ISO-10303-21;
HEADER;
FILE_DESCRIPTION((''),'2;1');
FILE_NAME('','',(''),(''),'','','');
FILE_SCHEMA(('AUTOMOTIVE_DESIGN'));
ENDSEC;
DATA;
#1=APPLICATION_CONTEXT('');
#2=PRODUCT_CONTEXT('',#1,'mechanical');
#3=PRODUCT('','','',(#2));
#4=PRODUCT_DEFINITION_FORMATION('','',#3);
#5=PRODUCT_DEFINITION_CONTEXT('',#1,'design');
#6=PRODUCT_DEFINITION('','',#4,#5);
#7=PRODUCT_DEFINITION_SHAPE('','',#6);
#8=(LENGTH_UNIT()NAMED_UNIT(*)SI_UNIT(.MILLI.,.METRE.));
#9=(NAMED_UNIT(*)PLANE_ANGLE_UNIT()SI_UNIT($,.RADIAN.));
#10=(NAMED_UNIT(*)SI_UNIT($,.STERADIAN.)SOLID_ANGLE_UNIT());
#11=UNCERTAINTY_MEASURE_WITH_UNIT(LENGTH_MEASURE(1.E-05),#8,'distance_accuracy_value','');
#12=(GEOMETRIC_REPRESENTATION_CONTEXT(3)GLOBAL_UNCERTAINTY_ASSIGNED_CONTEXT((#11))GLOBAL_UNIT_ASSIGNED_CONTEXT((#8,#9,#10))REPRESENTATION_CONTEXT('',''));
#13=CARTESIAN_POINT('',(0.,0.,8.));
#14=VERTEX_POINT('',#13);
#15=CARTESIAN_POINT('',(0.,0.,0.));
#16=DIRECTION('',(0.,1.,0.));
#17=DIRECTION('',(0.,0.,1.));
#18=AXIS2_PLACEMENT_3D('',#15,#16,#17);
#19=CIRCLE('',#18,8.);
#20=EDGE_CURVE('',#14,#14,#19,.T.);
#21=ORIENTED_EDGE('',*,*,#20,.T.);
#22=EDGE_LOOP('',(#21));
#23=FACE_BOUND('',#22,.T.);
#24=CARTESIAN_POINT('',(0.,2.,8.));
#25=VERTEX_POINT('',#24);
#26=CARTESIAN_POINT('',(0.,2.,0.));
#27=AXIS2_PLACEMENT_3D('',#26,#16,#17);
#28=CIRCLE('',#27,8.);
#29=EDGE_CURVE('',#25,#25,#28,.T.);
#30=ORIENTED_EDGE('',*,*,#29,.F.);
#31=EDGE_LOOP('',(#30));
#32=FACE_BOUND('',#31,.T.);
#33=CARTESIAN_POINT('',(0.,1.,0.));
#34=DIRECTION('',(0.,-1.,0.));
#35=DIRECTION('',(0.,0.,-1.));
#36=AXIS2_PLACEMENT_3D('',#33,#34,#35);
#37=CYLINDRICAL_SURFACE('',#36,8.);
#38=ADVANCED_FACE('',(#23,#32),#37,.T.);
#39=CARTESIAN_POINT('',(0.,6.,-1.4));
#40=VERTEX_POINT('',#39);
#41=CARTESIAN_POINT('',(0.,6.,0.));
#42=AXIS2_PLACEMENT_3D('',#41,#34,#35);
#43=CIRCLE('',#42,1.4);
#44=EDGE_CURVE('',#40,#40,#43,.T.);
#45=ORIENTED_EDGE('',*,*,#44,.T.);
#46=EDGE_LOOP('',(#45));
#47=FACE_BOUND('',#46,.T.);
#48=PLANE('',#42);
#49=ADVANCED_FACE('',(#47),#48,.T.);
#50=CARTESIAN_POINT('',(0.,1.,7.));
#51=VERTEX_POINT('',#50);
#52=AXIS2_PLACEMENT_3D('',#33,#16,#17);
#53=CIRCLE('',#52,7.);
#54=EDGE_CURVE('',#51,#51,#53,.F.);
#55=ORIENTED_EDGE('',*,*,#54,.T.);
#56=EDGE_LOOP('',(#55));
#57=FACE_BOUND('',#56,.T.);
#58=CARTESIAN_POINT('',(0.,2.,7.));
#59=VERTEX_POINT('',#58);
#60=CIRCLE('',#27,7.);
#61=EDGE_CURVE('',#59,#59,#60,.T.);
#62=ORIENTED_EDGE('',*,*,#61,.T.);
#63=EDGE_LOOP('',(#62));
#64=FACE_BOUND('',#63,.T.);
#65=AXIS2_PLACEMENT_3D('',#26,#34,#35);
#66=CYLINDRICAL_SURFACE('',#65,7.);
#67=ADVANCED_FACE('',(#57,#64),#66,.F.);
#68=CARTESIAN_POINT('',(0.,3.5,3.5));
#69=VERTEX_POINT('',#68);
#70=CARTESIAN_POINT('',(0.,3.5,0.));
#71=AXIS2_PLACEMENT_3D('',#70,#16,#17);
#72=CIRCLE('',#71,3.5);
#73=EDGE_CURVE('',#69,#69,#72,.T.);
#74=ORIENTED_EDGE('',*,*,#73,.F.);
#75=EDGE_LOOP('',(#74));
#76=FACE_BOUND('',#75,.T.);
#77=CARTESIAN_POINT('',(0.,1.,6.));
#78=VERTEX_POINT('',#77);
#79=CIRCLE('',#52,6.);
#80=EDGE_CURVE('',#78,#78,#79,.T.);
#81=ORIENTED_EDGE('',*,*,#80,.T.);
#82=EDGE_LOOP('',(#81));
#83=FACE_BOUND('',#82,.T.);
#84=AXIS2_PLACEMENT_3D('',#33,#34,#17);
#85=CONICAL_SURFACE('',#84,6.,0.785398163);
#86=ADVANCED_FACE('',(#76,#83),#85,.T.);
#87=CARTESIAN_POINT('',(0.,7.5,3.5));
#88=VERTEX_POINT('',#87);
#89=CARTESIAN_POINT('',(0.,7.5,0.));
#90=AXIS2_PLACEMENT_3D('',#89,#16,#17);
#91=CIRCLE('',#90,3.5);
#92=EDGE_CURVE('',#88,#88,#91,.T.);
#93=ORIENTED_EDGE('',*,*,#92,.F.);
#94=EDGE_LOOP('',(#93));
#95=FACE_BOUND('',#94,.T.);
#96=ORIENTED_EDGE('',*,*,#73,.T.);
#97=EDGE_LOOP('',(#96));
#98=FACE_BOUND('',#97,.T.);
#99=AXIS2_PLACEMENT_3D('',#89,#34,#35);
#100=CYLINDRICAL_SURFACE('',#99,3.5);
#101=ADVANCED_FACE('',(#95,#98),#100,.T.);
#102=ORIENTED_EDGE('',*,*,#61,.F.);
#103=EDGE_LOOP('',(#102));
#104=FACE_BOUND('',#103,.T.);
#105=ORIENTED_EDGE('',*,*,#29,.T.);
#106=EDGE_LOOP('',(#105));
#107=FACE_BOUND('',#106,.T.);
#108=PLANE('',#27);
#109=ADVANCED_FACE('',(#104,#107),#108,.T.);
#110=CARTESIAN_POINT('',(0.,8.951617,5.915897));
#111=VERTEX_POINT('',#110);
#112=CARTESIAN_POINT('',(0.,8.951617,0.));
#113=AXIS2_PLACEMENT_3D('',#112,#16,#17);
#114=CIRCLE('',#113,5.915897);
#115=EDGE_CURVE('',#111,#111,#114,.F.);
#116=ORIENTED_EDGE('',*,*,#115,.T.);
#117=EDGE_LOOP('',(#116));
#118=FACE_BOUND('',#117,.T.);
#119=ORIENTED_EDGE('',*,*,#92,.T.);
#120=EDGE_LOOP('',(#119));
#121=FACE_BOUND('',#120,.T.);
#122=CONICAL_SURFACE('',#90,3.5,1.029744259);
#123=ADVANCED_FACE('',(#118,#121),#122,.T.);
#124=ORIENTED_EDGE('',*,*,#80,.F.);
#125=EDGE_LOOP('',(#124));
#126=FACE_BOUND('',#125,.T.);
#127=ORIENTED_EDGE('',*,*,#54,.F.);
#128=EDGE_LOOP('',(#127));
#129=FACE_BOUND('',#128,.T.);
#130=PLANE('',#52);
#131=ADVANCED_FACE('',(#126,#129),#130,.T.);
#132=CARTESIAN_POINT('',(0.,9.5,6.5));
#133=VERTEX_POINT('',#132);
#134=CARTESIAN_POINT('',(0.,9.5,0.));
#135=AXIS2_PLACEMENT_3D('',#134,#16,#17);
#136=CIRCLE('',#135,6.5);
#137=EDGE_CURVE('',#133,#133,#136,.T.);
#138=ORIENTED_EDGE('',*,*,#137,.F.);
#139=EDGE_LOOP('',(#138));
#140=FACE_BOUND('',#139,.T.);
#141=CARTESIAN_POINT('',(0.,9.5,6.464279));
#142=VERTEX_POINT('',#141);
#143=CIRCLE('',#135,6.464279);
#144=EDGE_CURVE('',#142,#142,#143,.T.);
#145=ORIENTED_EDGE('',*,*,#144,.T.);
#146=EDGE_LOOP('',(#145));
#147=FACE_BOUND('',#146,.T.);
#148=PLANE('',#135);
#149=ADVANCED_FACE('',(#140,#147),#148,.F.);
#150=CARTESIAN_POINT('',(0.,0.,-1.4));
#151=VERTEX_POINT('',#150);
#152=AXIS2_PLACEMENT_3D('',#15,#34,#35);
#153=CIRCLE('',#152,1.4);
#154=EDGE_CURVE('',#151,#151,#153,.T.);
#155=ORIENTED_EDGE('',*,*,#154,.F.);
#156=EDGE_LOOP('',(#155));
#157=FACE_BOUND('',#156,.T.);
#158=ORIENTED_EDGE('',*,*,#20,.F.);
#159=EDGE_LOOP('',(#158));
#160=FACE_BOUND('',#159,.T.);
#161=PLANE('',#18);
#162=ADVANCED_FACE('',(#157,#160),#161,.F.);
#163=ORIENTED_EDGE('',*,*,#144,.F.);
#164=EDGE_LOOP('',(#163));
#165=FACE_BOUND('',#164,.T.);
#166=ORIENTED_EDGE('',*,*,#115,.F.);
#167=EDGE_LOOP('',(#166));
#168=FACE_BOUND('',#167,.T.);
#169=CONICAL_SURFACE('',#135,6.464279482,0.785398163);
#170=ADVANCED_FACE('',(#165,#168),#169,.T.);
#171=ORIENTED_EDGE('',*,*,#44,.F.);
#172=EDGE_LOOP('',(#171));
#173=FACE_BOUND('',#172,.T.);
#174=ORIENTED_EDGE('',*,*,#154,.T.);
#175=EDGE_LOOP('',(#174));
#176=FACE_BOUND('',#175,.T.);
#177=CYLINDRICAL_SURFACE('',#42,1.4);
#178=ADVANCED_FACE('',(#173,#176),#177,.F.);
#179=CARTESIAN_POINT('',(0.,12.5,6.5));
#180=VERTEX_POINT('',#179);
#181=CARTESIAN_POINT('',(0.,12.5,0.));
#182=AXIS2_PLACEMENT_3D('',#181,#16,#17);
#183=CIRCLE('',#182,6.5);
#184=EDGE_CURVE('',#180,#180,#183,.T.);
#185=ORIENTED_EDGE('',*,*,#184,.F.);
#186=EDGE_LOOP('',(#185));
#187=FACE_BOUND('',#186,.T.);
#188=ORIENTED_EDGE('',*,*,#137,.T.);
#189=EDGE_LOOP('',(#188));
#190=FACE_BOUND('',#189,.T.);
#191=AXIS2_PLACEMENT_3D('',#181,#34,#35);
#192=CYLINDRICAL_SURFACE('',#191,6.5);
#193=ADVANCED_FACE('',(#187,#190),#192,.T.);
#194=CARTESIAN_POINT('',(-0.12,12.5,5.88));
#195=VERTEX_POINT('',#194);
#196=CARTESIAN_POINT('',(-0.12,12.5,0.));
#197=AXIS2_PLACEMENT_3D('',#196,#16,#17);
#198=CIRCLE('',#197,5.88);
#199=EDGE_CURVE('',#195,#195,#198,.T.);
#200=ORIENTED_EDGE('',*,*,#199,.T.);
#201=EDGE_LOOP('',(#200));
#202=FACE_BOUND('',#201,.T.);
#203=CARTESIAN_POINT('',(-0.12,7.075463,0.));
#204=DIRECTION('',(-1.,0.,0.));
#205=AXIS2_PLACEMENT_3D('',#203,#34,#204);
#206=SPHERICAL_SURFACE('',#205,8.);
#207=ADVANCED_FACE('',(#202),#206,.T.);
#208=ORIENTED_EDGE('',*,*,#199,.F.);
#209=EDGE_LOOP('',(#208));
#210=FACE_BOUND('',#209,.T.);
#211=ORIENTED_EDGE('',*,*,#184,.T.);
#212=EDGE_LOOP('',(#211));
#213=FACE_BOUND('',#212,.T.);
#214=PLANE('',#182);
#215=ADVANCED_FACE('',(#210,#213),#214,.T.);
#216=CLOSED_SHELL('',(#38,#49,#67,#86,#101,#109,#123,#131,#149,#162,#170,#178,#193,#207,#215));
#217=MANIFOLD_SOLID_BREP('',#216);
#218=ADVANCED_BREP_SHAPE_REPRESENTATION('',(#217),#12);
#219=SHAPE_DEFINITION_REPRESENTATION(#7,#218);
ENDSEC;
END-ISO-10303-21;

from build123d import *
from build123d.topology import SkipClean

# Parameters (mm, degrees)
SKETCH1_R           = 8
BOSS_EXTRUDE1_DEPTH = 1
SKETCH2_R           = 6
BOSS_EXTRUDE2_DEPTH = 2.5
BOSS_EXTRUDE2_TAPER = 45
SKETCH3_R           = 3.5
BOSS_EXTRUDE3_DEPTH = 4
SKETCH4_R           = 3.5
BOSS_EXTRUDE4_DEPTH = 1
BOSS_EXTRUDE4_DRAFT = -59
SKETCH6_R           = 5.164279482
BOSS_EXTRUDE5_DEPTH = 1
SKETCH7_R           = 6.5
BOSS_EXTRUDE6_DEPTH = 3
SKETCH9_R           = 8
SKETCH9_R_2         = 7
BOSS_EXTRUDE7_DEPTH = 1
SKETCH10_R          = 1.4
CUT_EXTRUDE1_DEPTH  = 6


with BuildPart() as part:
    # Sketch1 → Boss-Extrude1 (new body)
    with BuildSketch(Plane(origin=(0, 0, 0), x_dir=(1, 0, 0), z_dir=(0, 1, 0))):
        with Locations(Location((0, 0, 0), (0, 0, 270))):
            Circle(SKETCH1_R)
    extrude(amount=BOSS_EXTRUDE1_DEPTH)

    # Sketch2 → Boss-Extrude2 (add)
    with BuildSketch(Plane(origin=(0, 1, 0), x_dir=(1, 0, 0), z_dir=(0, 1, 0))):
        Circle(SKETCH2_R)
    extrude(amount=BOSS_EXTRUDE2_DEPTH, taper=BOSS_EXTRUDE2_TAPER)

    # Sketch3 → Boss-Extrude3 (add)
    with BuildSketch(Plane(origin=(0, 3.5, 0), x_dir=(1, 0, 0), z_dir=(0, 1, 0))):
        with Locations(Location((0, 0, 0), (0, 0, 270))):
            Circle(SKETCH3_R)
    extrude(amount=BOSS_EXTRUDE3_DEPTH)


with BuildPart() as boss_extrude4_tool:
    # Sketch4 → Boss-Extrude4 (with draft: the straight prism first)
    with BuildSketch(Plane(origin=(0, 7.5, 0), x_dir=(1, 0, 0), z_dir=(0, 1, 0))):
        with Locations(Location((0, 0, 0), (0, 0, 270))):
            Circle(SKETCH4_R)
    extrude(amount=BOSS_EXTRUDE4_DEPTH)
    # Boss-Extrude4: the draft: its side faces are tilted about the plane it starts from
    boss_extrude4_sides = [boss_extrude4_tool.faces().sort_by_distance(p)[0] for p in [
        (0, 8, -3.5),
    ]]
    draft(boss_extrude4_sides, Plane(origin=(0, 7.5, 0), x_dir=(1, 0, 0), z_dir=(0, 1, 0)), BOSS_EXTRUDE4_DRAFT)


with BuildPart() as part_1:
    add(part.part)

    # Boss-Extrude4: add boss_extrude4_tool
    add(boss_extrude4_tool.part)

    # Sketch6 → Boss-Extrude5 (add)
    with BuildSketch(Plane(origin=(0, 8.5, 0), x_dir=(1, 0, 0), z_dir=(0, 1, 0))):
        with Locations(Location((0, 0, 0), (0, 0, 270))):
            Circle(SKETCH6_R)
    extrude(amount=BOSS_EXTRUDE5_DEPTH)

    # Sketch7 → Boss-Extrude6 (add)
    with BuildSketch(Plane(origin=(0, 9.5, 0), x_dir=(1, 0, 0), z_dir=(0, 1, 0))):
        with Locations(Location((0, 0, 0), (0, 0, 270))):
            Circle(SKETCH7_R)
    extrude(amount=BOSS_EXTRUDE6_DEPTH)

    # Sketch8 → Revolve1 (revolve)
    with SkipClean():  # the faces are left unmerged after this step: merging them gives an invalid solid
        with BuildSketch(Plane.XY):
            with BuildLine():
                ThreePointArc((-0.12, 15.075463153), (-3.329649921, 14.403365131), (-6, 12.5))
                Line((-6, 12.5), (-0.12, 12.5))
                Line((-0.12, 12.5), (-0.12, 15.075463153))
            make_face()
            with BuildLine():
                Line((-0.12, 15.075463153), (-0.12, 12.5))
                Line((-0.12, 12.5), (5.76, 12.5))
                ThreePointArc((5.76, 12.5), (3.089649921, 14.403365131), (-0.12, 15.075463153))
            make_face()
        revolve(axis=Axis((-0.12, 12.5, 0), (0, 1, 0)))
    add(part_1.part.scale(1), mode=Mode.REPLACE)  # the faces are merged on a copy

    # Sketch9 → Boss-Extrude7 (add)
    with BuildSketch(Plane(origin=(0, 1, 0), x_dir=(1, 0, 0), z_dir=(0, 1, 0))):
        with Locations(Location((0, 0, 0), (0, 0, 270))):
            Circle(SKETCH9_R)
        with Locations(Location((0, 0, 0), (0, 0, 270))):
            Circle(SKETCH9_R_2, mode=Mode.SUBTRACT)
    extrude(amount=BOSS_EXTRUDE7_DEPTH)

    # Sketch10 → Cut-Extrude1 (cut)
    with BuildSketch(Plane.XZ):
        with Locations(Location((0, 0, 0), (0, 0, 270))):
            Circle(SKETCH10_R)
    extrude(amount=-CUT_EXTRUDE1_DEPTH, mode=Mode.SUBTRACT)

    # Chamfer1: read off the stored shape, not the designer's step
    # Chamfer1 outline → Chamfer1 (revolve)
    with BuildSketch(Plane.XY):
        Polygon((5.164279482, 9.5), (5.164279482, 8.5), (5.915896622, 8.95161714), (6.464279482, 9.5), align=None)
    revolve(axis=Axis((0, 0, 0), (0, 1, 0)))


solid = part_1.part
